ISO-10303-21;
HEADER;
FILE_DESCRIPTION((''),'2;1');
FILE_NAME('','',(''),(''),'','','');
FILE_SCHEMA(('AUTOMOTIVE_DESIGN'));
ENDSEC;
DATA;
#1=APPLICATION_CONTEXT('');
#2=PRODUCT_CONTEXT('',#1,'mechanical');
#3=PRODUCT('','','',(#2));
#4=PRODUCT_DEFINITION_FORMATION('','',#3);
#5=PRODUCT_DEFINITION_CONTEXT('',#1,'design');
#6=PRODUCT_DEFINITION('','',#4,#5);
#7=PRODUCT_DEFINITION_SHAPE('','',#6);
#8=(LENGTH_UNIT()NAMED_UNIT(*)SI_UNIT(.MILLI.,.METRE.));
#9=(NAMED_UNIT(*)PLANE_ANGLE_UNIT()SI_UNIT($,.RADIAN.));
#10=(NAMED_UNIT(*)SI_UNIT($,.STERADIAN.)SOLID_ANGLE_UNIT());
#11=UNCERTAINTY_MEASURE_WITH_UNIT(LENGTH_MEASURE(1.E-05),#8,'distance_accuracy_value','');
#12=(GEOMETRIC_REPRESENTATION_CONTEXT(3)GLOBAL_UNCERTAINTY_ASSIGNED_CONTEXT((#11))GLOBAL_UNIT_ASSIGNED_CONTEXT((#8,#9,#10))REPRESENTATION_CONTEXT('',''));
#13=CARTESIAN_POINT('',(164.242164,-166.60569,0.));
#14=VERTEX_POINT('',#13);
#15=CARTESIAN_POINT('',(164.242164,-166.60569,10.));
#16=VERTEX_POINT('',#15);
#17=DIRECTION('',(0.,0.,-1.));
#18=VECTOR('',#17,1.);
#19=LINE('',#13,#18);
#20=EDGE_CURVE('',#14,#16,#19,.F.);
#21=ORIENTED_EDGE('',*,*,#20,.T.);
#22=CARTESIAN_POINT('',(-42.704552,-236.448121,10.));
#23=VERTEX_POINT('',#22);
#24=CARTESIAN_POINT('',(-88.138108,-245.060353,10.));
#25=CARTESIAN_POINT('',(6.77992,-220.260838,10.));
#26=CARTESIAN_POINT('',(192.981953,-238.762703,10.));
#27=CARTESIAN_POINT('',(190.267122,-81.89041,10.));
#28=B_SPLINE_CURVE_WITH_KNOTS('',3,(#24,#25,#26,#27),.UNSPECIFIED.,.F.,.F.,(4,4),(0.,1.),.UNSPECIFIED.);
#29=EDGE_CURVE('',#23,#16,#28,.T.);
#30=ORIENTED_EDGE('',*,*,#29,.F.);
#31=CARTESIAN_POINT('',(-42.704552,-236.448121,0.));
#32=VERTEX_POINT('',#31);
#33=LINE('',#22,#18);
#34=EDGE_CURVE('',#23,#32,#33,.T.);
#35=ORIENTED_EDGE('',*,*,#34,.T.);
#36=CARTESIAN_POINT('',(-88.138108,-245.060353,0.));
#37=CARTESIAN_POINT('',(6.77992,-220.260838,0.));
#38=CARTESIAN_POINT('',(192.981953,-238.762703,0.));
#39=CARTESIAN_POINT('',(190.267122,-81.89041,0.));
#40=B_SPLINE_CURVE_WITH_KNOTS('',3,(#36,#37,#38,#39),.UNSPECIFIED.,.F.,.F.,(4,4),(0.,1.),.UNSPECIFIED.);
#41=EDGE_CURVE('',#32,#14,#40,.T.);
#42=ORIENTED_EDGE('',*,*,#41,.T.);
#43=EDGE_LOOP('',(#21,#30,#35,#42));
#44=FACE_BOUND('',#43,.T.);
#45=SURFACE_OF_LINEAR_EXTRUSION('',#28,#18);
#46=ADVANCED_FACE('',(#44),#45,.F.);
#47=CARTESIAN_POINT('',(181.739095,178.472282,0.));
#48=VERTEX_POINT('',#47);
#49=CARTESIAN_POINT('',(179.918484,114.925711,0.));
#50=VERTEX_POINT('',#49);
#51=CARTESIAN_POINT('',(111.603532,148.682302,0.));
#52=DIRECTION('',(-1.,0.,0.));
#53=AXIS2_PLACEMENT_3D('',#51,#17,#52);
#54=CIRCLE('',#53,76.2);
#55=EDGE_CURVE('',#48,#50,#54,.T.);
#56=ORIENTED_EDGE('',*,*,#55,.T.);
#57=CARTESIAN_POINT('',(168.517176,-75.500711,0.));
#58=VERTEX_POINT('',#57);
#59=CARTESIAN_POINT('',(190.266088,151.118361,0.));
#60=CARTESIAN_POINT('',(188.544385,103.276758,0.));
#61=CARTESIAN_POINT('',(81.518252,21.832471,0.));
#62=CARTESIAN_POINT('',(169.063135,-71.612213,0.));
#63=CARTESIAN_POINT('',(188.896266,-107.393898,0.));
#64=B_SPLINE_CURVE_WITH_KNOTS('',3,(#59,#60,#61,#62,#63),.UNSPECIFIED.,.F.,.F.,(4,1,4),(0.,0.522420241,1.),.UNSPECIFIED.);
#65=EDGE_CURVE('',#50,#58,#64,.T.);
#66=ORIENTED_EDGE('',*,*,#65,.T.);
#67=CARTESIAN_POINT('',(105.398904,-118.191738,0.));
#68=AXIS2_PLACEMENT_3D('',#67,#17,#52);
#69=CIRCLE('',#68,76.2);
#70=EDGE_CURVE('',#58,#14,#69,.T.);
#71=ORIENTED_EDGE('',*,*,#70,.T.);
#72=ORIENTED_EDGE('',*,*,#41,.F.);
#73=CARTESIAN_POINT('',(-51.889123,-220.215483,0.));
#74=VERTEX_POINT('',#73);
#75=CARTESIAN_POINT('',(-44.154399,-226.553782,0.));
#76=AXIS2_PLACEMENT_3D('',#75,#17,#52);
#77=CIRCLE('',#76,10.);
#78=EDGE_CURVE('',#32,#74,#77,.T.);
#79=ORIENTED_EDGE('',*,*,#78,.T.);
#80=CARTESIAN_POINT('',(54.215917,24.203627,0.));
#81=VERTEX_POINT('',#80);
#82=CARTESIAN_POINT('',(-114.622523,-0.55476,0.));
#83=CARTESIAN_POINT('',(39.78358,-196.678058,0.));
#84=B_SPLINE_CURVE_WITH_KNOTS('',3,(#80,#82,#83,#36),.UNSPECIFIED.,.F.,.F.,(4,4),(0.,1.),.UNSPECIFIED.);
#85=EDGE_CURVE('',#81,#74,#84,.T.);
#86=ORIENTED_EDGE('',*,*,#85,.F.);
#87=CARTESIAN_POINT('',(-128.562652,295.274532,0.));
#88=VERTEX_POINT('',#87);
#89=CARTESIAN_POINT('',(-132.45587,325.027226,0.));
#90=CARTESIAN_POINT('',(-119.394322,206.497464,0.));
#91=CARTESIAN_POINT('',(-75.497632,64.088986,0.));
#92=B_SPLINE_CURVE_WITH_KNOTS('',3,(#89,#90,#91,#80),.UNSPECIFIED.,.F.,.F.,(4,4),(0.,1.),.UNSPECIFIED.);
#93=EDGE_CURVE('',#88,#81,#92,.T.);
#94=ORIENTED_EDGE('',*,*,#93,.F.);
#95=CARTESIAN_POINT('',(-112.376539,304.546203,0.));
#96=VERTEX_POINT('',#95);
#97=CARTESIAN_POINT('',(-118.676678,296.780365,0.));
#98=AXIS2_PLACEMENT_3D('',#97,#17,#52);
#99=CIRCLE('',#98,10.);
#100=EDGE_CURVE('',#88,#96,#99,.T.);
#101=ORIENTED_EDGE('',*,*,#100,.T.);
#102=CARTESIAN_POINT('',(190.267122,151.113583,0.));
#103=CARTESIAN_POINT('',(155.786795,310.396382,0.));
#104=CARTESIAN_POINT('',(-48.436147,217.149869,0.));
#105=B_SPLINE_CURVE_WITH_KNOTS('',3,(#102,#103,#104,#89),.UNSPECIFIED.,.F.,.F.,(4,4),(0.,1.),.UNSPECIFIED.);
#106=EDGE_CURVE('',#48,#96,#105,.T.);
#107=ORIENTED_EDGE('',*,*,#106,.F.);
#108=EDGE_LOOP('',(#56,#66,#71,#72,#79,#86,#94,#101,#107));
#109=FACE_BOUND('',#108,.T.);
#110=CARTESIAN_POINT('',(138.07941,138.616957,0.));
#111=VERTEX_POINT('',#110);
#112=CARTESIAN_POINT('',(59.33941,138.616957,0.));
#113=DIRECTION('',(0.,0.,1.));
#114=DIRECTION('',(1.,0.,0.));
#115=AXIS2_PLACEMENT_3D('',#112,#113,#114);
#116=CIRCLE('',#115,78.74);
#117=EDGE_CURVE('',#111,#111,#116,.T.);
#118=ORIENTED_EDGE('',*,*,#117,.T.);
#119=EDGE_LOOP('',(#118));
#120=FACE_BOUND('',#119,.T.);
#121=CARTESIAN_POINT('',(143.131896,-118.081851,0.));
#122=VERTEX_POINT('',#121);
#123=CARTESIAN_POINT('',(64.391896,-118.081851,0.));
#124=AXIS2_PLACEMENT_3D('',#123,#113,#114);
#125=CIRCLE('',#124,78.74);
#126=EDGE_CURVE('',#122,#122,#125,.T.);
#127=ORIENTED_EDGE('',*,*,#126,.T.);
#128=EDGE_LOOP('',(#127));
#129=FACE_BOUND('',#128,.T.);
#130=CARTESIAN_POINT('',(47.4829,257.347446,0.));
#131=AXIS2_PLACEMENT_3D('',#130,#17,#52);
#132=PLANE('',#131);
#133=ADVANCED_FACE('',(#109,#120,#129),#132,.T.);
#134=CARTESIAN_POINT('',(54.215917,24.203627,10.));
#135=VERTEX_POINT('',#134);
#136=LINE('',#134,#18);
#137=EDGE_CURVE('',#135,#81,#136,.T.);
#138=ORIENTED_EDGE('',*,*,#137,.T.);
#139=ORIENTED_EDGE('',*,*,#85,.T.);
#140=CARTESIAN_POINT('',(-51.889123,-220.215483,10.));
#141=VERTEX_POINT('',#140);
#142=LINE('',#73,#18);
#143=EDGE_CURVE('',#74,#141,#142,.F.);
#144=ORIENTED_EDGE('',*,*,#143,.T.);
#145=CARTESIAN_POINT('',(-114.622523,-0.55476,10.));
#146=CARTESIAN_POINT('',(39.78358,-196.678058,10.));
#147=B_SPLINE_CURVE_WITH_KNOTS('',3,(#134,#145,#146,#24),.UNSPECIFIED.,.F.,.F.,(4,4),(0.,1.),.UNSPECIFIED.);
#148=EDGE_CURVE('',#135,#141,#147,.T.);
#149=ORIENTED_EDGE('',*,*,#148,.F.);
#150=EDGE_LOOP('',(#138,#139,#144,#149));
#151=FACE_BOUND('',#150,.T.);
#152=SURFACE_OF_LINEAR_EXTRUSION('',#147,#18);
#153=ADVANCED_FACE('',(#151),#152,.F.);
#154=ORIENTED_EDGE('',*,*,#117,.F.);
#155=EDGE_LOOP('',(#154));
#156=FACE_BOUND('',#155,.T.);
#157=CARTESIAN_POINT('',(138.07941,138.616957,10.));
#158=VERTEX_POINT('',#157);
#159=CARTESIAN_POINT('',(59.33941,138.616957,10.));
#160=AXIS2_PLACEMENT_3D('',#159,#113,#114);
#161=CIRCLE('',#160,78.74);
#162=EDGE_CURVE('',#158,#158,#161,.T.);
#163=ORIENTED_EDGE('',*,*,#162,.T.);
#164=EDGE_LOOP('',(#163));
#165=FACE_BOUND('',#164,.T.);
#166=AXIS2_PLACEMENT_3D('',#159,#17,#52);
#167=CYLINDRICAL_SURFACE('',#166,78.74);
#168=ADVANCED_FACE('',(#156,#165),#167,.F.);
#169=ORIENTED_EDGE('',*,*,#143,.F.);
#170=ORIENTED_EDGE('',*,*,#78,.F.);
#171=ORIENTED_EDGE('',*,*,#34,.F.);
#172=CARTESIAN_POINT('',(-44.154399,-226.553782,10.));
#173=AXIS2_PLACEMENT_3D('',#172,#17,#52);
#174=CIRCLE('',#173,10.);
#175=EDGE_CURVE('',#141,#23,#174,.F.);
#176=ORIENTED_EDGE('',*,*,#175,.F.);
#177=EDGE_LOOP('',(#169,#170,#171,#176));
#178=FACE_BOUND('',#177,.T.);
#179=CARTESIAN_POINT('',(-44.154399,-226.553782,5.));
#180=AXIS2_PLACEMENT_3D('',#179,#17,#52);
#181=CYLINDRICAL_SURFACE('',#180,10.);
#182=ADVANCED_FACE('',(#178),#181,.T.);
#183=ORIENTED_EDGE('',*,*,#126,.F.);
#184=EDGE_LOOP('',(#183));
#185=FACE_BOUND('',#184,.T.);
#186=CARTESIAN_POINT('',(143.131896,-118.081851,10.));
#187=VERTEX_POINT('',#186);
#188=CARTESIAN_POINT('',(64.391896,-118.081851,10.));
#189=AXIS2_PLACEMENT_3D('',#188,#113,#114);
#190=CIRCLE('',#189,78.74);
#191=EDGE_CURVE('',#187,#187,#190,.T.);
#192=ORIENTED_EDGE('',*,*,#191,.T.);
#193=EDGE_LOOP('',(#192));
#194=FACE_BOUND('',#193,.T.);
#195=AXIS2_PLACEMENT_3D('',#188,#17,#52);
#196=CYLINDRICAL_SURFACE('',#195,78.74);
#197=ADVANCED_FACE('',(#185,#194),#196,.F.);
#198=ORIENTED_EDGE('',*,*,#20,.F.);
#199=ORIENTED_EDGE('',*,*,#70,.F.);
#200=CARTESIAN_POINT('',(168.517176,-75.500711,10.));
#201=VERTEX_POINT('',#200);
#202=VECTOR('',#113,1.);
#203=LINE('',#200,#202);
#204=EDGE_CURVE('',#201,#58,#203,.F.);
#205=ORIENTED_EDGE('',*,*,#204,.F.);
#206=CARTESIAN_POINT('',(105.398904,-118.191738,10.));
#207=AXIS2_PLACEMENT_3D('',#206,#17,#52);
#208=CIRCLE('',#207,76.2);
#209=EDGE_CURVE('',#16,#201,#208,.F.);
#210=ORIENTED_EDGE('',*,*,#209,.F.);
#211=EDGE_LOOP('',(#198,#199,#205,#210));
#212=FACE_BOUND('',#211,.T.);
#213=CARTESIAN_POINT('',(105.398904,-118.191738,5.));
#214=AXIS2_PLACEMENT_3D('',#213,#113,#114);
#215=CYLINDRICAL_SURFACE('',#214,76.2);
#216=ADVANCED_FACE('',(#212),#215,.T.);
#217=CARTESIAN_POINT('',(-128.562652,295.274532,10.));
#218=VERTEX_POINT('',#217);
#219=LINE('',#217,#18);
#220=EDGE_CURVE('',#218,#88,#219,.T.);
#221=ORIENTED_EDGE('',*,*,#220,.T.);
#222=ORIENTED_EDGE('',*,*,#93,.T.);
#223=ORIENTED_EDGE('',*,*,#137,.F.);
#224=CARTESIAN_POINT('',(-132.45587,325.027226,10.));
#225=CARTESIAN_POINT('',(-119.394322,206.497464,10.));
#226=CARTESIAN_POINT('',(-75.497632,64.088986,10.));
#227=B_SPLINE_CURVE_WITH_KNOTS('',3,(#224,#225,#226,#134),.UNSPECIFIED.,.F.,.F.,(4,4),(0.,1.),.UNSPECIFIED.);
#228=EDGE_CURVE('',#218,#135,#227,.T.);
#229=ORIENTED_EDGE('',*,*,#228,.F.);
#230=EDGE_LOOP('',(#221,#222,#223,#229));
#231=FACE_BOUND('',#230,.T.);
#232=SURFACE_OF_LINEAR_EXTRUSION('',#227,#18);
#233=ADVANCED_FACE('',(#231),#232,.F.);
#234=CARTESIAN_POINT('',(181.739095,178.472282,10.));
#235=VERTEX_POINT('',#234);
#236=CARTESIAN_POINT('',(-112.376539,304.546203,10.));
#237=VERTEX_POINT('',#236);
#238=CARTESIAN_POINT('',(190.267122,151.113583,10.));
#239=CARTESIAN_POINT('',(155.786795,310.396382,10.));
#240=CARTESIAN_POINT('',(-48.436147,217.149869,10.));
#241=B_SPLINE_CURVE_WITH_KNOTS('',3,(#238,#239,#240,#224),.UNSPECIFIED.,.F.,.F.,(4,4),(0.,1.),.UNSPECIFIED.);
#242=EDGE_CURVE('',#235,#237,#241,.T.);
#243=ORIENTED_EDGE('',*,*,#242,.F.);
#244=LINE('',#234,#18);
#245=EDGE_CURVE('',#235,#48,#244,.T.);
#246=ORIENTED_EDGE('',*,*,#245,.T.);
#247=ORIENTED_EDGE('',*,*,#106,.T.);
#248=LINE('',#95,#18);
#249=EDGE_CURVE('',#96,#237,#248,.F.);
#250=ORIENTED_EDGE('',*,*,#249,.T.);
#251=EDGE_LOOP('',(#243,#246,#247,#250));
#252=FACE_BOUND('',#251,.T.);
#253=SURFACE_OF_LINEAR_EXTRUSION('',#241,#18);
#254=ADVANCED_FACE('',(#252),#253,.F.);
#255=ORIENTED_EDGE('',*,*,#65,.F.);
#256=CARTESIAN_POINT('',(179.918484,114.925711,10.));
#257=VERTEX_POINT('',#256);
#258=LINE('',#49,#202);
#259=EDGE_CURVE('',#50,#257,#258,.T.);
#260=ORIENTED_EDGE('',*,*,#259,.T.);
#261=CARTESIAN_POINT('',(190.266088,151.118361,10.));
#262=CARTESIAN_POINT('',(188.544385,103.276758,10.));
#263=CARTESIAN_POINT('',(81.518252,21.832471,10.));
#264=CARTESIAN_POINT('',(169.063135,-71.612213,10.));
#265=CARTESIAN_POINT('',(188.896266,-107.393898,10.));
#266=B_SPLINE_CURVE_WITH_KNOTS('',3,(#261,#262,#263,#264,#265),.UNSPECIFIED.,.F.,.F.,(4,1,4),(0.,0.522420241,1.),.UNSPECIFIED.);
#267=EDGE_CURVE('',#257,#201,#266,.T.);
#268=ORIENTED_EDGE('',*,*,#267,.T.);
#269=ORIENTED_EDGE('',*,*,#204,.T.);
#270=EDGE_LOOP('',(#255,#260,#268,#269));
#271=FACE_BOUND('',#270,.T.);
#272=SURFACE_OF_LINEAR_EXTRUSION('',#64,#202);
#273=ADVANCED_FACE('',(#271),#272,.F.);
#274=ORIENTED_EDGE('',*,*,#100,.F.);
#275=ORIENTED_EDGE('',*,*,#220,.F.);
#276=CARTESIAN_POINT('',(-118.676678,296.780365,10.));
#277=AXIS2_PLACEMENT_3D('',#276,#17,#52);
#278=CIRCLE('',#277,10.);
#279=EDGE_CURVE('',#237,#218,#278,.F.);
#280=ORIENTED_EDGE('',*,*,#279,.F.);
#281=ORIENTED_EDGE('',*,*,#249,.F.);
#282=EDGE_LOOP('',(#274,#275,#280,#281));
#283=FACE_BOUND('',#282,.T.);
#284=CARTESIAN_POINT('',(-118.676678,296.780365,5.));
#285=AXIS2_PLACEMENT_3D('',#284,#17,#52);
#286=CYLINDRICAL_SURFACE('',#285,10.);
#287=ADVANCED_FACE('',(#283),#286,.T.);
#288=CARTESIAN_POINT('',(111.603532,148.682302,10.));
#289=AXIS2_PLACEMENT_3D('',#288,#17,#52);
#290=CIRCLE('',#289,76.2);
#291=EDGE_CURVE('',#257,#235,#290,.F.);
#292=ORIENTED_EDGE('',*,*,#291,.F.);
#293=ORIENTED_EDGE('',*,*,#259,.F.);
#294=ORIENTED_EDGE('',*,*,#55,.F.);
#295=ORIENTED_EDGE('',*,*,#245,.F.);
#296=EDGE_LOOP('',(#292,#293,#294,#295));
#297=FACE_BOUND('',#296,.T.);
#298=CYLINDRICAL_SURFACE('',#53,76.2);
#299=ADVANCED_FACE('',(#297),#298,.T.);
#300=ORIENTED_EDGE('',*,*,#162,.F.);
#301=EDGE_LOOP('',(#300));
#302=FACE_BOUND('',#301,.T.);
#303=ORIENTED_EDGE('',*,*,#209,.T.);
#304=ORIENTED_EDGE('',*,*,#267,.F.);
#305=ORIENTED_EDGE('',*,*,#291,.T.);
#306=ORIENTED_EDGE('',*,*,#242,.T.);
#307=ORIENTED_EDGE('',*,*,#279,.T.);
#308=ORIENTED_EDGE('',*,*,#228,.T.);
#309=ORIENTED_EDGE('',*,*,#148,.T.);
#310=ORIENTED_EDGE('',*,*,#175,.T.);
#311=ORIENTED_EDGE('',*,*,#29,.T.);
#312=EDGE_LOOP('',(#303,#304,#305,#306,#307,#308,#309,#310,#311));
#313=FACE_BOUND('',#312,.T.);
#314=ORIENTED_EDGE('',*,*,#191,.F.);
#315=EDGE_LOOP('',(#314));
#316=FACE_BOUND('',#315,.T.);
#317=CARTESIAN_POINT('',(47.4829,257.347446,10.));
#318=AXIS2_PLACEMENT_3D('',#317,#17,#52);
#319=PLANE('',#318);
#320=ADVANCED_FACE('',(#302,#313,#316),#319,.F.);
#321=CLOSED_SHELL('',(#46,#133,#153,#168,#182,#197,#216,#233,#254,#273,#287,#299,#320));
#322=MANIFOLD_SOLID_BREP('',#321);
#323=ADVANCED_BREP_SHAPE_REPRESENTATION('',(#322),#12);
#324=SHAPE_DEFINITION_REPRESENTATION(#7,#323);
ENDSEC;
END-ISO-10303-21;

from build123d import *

# Parameters (mm, degrees)
SKETCH_1_R          = 78.74
EXTRUDE_1_DEPTH     = 10
CUT_EXTRUDE_1_DEPTH = 10
FILLET_1_R          = 76.2
FILLET_2_R          = 10
FILLET_3_R          = 10


with BuildPart() as part:
    # 草图1 → 凸台-拉伸1 (new body)
    with BuildSketch(Plane.XY):
        with BuildLine():
            Line((190.267122197, 151.113582673), (190.267122197, -81.890410003))
            add(Edge.make_bspline(
                [(-88.138107542, -245.060353001), (6.779919745, -220.260837552), (192.981953107, -238.762703419), (190.267122197, -81.890410003)],
                knots=[0, 0, 0, 0, 1, 1, 1, 1], degree=3))
            add(Edge.make_bspline(
                [(54.215916802, 24.203627008), (-114.622523085, -0.554759509), (39.783580025, -196.67805819), (-88.138107542, -245.060353001)],
                knots=[0, 0, 0, 0, 1, 1, 1, 1], degree=3))
            add(Edge.make_bspline(
                [(-132.455869838, 325.027225622), (-119.39432206, 206.497464479), (-75.497631539, 64.088986069), (54.215916802, 24.203627008)],
                knots=[0, 0, 0, 0, 1, 1, 1, 1], degree=3))
            add(Edge.make_bspline(
                [(190.267122197, 151.113582673), (155.786794972, 310.396382422), (-48.436146721, 217.1498695), (-132.455869838, 325.027225622)],
                knots=[0, 0, 0, 0, 1, 1, 1, 1], degree=3))
        make_face()
        with Locations((59.33940983, 138.616957424)):
            Circle(SKETCH_1_R, mode=Mode.SUBTRACT)
        with Locations((64.391896117, -118.081850955)):
            Circle(SKETCH_1_R, mode=Mode.SUBTRACT)
    extrude(amount=EXTRUDE_1_DEPTH)

    # 草图2 → 切除-拉伸1 (cut)
    with BuildSketch(Plane.XY.offset(10)):
        with BuildLine():
            Line((188.896265885, -107.393898426), (205.862880188, -98.679704405))
            Line((205.862880188, -98.679704405), (202.340041163, 151.118361081))
            Line((202.340041163, 151.118361081), (190.266087737, 151.118361081))
            add(Edge.make_bspline(
                [(190.266087737, 151.118361081), (188.544384558, 103.276758096), (81.518251938, 21.832470975), (169.063135256, -71.612212638), (188.896265885, -107.393898426)],
                knots=[0, 0, 0, 0, 0.522420241, 1, 1, 1, 1], degree=3))
        make_face()
    extrude(amount=-CUT_EXTRUDE_1_DEPTH, mode=Mode.SUBTRACT)

    # 圆角1
    # the kernel refuses this fillet: 76.2 mm, written as the material it takes off along each edge
    with BuildSketch(Plane(origin=(190.266087737, 151.118361081, 10), x_dir=(-0.2976037870645713, 0.9546894709405909, 0), z_dir=(0, 0, -1))) as fillet_1_piece_1:
        with BuildLine():
            CenterArc((21.08459479, -75.823293684), FILLET_1_R, 84.3004486, 49.308731673)
            Line((-31.473255341, -20.649818267), (-32.524412344, -19.546348759))
            ThreePointArc((-32.524412344, -19.546348759), (-17.715527439, -7.413982661), (-0.50558089, 1.437693974))
            Line((-0.50558089, 1.437693974), (-0.135414126, 1.517972007))
            ThreePointArc((-0.135414126, 1.517972007), (14.320252658, 2.198651547), (28.803517484, 1.516465874))
            Line((28.803517484, 1.516465874), (28.652166059, 0))
        make_face()
    extrude(amount=10, mode=Mode.SUBTRACT)
    with BuildSketch(Plane(origin=(188.896265885, -107.393898426, 10), x_dir=(-0.5384434429536498, 0.8426616514000265, 0), z_dir=(0, 0, -1))) as fillet_1_piece_2:
        with BuildLine():
            CenterArc((35.859681761, -76.174050579), FILLET_1_R, 88.504672545, 73.519289888)
            Line((-36.620666388, -52.657266525), (-38.070273351, -52.186930844))
            ThreePointArc((-38.070273351, -52.186930844), (-23.283431284, -22.804726142), (-0.982229113, 1.1652476))
            Line((-0.982229113, 1.1652476), (-0.095133745, 1.521027801))
            ThreePointArc((-0.095133745, 1.521027801), (18.940917562, 1.917869961), (37.887922563, 1.523481012))
            Line((37.887922563, 1.523481012), (37.848153135, 0))
        make_face()
    extrude(amount=10, mode=Mode.SUBTRACT)

    # 圆角2
    fillet_2_edges = [part.edges().sort_by_distance(p)[0] for p in [
        (-132.455869838, 325.027225622, 5),
    ]]
    fillet(fillet_2_edges, radius=FILLET_2_R)

    # 圆角3
    fillet_3_edges = [part.edges().sort_by_distance(p)[0] for p in [
        (-88.138107542, -245.060353001, 5),
    ]]
    fillet(fillet_3_edges, radius=FILLET_3_R)


solid = part.part
